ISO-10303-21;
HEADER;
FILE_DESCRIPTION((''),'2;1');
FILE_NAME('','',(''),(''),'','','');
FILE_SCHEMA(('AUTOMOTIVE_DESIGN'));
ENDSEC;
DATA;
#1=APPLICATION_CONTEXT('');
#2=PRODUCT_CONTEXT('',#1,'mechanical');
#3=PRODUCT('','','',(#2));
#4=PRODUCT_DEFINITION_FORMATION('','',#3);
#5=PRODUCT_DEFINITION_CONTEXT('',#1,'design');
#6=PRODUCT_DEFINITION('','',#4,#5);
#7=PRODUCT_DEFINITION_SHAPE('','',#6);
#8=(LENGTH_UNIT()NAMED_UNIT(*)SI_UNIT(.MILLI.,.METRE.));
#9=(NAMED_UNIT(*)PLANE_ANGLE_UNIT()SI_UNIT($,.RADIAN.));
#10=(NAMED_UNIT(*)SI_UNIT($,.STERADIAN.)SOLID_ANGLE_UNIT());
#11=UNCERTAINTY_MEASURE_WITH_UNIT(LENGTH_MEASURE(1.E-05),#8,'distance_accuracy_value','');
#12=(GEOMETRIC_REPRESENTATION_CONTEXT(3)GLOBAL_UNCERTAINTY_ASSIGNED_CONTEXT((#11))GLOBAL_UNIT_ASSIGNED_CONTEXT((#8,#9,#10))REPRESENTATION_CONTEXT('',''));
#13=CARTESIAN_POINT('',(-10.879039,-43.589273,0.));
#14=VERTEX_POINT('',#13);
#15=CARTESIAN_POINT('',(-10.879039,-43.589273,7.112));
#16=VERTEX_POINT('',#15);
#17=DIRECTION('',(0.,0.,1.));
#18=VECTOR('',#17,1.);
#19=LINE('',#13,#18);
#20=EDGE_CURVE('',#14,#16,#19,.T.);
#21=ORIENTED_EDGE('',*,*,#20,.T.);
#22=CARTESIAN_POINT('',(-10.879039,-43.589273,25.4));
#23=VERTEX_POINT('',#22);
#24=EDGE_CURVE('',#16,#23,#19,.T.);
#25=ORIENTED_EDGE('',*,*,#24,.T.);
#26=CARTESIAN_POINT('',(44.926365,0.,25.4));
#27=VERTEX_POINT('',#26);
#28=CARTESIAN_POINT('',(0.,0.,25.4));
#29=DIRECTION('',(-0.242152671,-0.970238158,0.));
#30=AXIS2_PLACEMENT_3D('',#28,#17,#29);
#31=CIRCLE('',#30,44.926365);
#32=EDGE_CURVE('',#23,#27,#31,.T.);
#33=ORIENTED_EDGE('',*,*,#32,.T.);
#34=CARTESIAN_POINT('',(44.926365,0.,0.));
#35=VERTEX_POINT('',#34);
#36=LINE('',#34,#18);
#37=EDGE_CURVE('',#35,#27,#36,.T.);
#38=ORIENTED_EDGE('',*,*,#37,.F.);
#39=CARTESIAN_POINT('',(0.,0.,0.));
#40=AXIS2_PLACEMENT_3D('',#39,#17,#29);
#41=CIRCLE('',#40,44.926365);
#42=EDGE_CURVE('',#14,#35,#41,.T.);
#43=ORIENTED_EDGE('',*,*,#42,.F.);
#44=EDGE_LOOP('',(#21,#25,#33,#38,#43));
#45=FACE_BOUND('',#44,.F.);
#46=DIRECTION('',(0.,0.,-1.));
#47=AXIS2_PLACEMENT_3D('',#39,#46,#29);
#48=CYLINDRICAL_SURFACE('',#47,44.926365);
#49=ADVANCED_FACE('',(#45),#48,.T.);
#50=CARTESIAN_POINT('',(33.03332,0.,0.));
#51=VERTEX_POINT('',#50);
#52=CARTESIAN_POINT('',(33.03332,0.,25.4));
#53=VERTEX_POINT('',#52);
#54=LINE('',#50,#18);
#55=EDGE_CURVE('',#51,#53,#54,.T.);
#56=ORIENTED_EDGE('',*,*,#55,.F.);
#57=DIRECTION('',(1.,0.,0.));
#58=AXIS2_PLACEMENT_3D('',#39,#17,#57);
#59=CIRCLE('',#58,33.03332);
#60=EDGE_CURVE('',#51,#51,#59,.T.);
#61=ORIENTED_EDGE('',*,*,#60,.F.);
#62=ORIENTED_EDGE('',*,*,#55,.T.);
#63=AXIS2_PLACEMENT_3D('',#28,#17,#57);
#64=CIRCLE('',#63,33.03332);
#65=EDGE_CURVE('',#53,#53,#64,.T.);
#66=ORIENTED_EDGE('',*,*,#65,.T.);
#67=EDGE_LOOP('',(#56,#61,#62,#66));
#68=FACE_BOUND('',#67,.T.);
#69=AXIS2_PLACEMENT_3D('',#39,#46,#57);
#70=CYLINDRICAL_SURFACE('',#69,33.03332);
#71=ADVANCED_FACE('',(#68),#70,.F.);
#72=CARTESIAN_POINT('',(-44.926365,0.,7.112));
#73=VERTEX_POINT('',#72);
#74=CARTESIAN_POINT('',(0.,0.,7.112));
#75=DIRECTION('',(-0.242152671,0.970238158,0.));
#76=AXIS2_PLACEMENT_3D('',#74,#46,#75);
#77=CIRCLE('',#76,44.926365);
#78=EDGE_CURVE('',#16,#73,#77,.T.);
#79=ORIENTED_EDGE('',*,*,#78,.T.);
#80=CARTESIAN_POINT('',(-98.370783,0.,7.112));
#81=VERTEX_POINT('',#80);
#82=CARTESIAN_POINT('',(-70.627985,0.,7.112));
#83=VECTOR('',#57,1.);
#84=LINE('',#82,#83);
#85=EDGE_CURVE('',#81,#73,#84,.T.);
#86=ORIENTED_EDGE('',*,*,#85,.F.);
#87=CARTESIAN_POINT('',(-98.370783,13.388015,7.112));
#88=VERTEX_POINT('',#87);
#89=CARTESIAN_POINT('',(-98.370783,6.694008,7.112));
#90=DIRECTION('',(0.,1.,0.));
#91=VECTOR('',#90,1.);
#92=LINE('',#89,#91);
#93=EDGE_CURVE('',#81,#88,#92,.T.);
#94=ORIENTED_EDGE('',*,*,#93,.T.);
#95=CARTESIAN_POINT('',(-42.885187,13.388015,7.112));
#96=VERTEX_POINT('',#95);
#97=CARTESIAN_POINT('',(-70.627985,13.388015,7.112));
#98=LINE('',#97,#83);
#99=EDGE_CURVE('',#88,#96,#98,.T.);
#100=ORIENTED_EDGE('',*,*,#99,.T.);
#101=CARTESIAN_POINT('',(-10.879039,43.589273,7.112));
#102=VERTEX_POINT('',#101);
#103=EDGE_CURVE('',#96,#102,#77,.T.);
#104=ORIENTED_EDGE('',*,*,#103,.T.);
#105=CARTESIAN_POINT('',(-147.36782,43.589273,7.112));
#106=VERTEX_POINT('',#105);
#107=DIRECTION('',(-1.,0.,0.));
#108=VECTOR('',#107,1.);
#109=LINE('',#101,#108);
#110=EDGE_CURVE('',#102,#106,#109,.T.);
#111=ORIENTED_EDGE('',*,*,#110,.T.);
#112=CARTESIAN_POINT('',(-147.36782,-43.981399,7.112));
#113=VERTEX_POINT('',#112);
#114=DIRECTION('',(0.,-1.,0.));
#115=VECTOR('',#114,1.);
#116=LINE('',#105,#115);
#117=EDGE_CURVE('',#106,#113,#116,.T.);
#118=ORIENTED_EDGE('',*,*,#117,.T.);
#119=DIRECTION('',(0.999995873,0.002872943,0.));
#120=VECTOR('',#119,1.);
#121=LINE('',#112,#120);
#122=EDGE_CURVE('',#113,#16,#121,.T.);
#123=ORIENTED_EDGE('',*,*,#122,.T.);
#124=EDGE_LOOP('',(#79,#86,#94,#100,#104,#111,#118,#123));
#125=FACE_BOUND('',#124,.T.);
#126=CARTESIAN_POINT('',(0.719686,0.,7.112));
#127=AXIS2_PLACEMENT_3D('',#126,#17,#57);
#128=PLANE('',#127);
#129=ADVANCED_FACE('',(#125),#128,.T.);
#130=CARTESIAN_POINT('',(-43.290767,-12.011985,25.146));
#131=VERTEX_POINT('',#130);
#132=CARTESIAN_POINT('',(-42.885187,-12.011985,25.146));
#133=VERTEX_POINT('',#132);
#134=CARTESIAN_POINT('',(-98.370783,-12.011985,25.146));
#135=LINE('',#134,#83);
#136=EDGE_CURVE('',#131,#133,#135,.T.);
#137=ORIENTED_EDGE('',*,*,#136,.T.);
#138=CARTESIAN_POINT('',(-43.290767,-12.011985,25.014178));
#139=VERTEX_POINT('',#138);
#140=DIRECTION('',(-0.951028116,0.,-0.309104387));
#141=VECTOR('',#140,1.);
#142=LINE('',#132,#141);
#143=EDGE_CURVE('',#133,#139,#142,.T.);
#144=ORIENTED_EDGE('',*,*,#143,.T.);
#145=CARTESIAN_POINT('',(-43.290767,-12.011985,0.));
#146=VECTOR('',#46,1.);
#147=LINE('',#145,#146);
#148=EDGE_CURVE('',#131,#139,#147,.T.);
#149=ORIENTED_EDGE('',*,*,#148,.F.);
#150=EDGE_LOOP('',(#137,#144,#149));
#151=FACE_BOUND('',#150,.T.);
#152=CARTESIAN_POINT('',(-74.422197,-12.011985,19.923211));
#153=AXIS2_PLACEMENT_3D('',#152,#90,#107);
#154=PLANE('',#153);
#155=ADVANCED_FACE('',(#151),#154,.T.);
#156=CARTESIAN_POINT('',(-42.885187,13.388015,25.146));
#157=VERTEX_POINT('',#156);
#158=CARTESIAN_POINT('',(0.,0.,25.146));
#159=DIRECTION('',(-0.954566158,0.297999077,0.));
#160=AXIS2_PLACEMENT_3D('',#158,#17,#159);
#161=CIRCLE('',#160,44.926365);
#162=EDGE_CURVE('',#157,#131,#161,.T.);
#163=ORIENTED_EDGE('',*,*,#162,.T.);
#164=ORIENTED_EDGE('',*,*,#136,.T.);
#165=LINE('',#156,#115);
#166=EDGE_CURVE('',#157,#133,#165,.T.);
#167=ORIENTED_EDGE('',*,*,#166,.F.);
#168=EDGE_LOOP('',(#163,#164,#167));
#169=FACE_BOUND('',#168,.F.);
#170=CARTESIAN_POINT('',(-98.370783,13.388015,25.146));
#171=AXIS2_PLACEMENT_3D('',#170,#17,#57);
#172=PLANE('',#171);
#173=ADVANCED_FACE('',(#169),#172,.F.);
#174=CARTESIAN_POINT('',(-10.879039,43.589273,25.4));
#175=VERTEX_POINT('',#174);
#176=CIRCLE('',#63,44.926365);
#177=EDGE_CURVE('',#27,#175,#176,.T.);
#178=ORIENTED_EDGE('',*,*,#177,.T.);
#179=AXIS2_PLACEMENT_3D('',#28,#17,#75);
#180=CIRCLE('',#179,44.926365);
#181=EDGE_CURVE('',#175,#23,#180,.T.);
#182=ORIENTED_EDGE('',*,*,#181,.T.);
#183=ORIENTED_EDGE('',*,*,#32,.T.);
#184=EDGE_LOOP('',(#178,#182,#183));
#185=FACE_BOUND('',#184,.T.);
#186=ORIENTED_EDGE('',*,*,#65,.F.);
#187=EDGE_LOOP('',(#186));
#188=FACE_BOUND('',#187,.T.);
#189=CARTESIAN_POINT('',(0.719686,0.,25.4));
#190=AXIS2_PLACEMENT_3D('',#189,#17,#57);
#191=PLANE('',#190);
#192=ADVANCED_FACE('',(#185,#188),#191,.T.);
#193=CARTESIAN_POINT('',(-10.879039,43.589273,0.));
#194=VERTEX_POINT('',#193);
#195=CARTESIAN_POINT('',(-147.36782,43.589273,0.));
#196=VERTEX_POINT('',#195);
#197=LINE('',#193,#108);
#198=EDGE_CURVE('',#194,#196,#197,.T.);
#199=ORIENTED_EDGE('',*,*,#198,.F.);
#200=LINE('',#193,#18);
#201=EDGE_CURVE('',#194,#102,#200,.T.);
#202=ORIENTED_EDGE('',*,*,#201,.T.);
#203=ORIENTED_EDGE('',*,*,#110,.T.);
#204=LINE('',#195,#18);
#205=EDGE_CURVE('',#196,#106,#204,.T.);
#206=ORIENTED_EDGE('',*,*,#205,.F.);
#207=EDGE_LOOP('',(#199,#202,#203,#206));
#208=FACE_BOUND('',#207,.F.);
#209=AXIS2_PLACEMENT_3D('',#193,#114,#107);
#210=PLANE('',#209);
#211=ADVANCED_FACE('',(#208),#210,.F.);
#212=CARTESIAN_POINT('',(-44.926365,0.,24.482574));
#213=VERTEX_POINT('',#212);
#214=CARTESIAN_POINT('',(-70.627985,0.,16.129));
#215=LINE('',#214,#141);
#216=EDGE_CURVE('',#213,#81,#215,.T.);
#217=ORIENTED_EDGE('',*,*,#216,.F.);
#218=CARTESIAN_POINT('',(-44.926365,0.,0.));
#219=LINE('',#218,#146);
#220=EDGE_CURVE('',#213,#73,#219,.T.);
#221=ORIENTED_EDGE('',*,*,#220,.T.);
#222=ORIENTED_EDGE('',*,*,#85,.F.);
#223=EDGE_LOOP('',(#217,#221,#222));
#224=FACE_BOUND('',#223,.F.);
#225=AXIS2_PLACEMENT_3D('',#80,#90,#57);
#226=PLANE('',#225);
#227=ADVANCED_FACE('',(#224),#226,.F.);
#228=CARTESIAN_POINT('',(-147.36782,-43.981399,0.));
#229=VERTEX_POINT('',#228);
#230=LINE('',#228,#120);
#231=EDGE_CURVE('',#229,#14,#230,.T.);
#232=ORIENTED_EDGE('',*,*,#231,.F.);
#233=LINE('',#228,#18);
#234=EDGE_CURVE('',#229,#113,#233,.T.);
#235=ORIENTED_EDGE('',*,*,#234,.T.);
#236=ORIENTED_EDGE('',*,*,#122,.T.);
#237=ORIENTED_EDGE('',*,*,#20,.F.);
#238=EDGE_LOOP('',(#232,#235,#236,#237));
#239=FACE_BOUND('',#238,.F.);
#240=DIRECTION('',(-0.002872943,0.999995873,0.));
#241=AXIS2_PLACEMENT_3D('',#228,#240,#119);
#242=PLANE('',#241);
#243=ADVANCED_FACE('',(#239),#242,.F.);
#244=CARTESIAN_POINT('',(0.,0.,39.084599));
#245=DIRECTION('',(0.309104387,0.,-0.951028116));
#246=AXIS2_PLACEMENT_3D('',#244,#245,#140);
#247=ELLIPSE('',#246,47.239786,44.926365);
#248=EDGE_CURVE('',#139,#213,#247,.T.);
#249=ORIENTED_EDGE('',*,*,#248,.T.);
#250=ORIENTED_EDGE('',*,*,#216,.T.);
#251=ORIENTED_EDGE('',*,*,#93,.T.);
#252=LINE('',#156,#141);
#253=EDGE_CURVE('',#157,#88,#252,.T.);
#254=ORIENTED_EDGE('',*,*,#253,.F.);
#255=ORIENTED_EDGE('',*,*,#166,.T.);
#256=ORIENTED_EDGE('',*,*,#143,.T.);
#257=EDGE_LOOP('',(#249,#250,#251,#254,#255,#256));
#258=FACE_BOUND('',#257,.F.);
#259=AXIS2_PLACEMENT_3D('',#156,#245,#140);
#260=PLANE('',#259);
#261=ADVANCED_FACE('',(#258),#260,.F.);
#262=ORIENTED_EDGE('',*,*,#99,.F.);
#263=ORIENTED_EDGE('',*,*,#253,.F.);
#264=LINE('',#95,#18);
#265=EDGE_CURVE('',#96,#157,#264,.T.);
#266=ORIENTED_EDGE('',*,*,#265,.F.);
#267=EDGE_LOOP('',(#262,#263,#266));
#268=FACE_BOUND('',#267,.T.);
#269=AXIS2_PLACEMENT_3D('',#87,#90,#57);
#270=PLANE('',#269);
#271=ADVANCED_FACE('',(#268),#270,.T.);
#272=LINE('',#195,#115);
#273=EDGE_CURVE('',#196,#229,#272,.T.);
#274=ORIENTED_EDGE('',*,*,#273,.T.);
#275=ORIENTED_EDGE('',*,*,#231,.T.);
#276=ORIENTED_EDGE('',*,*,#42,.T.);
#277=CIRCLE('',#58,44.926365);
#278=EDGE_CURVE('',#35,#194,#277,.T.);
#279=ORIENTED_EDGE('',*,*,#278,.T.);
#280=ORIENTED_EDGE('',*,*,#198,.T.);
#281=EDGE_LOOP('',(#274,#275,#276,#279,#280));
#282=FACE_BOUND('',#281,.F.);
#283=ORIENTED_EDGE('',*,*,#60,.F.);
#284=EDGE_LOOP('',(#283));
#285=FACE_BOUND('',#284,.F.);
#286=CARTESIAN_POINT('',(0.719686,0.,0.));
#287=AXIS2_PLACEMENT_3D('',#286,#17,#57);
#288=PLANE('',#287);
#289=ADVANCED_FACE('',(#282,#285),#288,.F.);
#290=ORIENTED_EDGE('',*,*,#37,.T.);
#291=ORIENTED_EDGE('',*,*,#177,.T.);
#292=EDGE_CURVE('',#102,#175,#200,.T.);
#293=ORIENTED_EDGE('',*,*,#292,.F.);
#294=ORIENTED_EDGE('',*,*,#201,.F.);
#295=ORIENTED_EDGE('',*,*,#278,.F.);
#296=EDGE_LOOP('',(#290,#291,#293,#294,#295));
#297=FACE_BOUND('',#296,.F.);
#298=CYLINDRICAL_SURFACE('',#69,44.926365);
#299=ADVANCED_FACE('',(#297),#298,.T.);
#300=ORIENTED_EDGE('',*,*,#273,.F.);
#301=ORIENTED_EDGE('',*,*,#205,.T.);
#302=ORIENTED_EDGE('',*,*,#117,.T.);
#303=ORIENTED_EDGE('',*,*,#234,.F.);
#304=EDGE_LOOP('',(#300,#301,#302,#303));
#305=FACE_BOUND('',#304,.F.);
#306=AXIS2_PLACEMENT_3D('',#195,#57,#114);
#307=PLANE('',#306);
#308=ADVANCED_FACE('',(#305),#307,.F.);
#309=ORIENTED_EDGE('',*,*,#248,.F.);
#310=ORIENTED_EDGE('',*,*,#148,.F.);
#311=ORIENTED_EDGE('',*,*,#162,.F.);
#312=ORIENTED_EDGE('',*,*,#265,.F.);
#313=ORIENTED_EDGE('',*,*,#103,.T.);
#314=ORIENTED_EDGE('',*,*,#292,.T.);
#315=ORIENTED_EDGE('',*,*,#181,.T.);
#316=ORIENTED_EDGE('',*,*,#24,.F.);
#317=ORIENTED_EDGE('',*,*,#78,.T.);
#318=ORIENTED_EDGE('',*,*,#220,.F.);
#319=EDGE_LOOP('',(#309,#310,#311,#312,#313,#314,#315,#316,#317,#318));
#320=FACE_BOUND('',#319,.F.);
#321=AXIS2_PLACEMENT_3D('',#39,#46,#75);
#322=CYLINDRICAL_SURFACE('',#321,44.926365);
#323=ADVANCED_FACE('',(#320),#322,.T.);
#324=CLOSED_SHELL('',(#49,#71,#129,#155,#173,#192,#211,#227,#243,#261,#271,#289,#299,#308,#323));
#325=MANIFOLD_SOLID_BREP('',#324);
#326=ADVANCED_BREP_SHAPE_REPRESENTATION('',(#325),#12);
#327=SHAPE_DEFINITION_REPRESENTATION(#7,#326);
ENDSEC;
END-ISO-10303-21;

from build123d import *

# Parameters (mm, degrees)
F0_R     = 33.0333203714
F1_DEPTH = 25.4
F2_DEPTH = 7.112
F3_W     = 55.4855957025
F3_H     = 13.38801522
F4_DEPTH = 18.034
F7_DEPTH = 25.4


# Not quite as in the source:
# - a feature names something its author has since deleted; it is built from what else it names


with BuildPart() as f1:
    # F0 (on Top) → F1 (new body)
    with BuildSketch(Plane.XY):
        with BuildLine():
            ThreePointArc((-10.8790392065, -43.5892733327), (27.6552215769, -35.4057476022), (44.9263646842, 0))
            ThreePointArc((44.9263646842, 0), (27.6552215769, 35.4057476022), (-10.8790392065, 43.5892733327))
            ThreePointArc((-10.8790392065, 43.5892733327), (-44.9263646842, 0), (-10.8790392065, -43.5892733327))
        make_face()
        Circle(F0_R, mode=Mode.SUBTRACT)
    extrude(amount=F1_DEPTH)

    # F0 (on Top) → F2 (join)
    with BuildSketch(Plane.XY):
        with BuildLine():
            ThreePointArc((-10.8790392065, -43.5892733327), (27.6552215769, -35.4057476022), (44.9263646842, 0))
            ThreePointArc((44.9263646842, 0), (27.6552215769, 35.4057476022), (-10.8790392065, 43.5892733327))
            ThreePointArc((-10.8790392065, 43.5892733327), (-44.9263646842, 0), (-10.8790392065, -43.5892733327))
        make_face()
        Circle(F0_R, mode=Mode.SUBTRACT)
        with BuildLine():
            ThreePointArc((-10.8790392065, -43.5892733327), (-44.9263646842, 0), (-10.8790392065, 43.5892733327))
            Line((-10.8790392065, 43.5892733327), (-147.3678201437, 43.5892733327))
            Line((-147.3678201437, 43.5892733327), (-147.3678201437, -43.9813993871))
            Line((-147.3678201437, -43.9813993871), (-10.8790392065, -43.5892733327))
        make_face()
    extrude(amount=F2_DEPTH)

    # F3 (on face) → F4 (join)
    with BuildSketch(Plane.XY.offset(7.112)):
        with Locations((-70.6279851798, 6.69400761)):
            Rectangle(F3_W, F3_H)
    extrude(amount=F4_DEPTH)

    # F5 (on face) → F7 (cut)
    with BuildSketch(Plane(origin=(0, 13.38801522, 0), x_dir=(-1, 0, 0), z_dir=(0, 1, 0))):
        Polygon((42.8851873285, 25.146), (98.370783031, 7.112), (98.370783031, 25.146), align=None)
    extrude(amount=-F7_DEPTH, mode=Mode.SUBTRACT)


solid = f1.part
